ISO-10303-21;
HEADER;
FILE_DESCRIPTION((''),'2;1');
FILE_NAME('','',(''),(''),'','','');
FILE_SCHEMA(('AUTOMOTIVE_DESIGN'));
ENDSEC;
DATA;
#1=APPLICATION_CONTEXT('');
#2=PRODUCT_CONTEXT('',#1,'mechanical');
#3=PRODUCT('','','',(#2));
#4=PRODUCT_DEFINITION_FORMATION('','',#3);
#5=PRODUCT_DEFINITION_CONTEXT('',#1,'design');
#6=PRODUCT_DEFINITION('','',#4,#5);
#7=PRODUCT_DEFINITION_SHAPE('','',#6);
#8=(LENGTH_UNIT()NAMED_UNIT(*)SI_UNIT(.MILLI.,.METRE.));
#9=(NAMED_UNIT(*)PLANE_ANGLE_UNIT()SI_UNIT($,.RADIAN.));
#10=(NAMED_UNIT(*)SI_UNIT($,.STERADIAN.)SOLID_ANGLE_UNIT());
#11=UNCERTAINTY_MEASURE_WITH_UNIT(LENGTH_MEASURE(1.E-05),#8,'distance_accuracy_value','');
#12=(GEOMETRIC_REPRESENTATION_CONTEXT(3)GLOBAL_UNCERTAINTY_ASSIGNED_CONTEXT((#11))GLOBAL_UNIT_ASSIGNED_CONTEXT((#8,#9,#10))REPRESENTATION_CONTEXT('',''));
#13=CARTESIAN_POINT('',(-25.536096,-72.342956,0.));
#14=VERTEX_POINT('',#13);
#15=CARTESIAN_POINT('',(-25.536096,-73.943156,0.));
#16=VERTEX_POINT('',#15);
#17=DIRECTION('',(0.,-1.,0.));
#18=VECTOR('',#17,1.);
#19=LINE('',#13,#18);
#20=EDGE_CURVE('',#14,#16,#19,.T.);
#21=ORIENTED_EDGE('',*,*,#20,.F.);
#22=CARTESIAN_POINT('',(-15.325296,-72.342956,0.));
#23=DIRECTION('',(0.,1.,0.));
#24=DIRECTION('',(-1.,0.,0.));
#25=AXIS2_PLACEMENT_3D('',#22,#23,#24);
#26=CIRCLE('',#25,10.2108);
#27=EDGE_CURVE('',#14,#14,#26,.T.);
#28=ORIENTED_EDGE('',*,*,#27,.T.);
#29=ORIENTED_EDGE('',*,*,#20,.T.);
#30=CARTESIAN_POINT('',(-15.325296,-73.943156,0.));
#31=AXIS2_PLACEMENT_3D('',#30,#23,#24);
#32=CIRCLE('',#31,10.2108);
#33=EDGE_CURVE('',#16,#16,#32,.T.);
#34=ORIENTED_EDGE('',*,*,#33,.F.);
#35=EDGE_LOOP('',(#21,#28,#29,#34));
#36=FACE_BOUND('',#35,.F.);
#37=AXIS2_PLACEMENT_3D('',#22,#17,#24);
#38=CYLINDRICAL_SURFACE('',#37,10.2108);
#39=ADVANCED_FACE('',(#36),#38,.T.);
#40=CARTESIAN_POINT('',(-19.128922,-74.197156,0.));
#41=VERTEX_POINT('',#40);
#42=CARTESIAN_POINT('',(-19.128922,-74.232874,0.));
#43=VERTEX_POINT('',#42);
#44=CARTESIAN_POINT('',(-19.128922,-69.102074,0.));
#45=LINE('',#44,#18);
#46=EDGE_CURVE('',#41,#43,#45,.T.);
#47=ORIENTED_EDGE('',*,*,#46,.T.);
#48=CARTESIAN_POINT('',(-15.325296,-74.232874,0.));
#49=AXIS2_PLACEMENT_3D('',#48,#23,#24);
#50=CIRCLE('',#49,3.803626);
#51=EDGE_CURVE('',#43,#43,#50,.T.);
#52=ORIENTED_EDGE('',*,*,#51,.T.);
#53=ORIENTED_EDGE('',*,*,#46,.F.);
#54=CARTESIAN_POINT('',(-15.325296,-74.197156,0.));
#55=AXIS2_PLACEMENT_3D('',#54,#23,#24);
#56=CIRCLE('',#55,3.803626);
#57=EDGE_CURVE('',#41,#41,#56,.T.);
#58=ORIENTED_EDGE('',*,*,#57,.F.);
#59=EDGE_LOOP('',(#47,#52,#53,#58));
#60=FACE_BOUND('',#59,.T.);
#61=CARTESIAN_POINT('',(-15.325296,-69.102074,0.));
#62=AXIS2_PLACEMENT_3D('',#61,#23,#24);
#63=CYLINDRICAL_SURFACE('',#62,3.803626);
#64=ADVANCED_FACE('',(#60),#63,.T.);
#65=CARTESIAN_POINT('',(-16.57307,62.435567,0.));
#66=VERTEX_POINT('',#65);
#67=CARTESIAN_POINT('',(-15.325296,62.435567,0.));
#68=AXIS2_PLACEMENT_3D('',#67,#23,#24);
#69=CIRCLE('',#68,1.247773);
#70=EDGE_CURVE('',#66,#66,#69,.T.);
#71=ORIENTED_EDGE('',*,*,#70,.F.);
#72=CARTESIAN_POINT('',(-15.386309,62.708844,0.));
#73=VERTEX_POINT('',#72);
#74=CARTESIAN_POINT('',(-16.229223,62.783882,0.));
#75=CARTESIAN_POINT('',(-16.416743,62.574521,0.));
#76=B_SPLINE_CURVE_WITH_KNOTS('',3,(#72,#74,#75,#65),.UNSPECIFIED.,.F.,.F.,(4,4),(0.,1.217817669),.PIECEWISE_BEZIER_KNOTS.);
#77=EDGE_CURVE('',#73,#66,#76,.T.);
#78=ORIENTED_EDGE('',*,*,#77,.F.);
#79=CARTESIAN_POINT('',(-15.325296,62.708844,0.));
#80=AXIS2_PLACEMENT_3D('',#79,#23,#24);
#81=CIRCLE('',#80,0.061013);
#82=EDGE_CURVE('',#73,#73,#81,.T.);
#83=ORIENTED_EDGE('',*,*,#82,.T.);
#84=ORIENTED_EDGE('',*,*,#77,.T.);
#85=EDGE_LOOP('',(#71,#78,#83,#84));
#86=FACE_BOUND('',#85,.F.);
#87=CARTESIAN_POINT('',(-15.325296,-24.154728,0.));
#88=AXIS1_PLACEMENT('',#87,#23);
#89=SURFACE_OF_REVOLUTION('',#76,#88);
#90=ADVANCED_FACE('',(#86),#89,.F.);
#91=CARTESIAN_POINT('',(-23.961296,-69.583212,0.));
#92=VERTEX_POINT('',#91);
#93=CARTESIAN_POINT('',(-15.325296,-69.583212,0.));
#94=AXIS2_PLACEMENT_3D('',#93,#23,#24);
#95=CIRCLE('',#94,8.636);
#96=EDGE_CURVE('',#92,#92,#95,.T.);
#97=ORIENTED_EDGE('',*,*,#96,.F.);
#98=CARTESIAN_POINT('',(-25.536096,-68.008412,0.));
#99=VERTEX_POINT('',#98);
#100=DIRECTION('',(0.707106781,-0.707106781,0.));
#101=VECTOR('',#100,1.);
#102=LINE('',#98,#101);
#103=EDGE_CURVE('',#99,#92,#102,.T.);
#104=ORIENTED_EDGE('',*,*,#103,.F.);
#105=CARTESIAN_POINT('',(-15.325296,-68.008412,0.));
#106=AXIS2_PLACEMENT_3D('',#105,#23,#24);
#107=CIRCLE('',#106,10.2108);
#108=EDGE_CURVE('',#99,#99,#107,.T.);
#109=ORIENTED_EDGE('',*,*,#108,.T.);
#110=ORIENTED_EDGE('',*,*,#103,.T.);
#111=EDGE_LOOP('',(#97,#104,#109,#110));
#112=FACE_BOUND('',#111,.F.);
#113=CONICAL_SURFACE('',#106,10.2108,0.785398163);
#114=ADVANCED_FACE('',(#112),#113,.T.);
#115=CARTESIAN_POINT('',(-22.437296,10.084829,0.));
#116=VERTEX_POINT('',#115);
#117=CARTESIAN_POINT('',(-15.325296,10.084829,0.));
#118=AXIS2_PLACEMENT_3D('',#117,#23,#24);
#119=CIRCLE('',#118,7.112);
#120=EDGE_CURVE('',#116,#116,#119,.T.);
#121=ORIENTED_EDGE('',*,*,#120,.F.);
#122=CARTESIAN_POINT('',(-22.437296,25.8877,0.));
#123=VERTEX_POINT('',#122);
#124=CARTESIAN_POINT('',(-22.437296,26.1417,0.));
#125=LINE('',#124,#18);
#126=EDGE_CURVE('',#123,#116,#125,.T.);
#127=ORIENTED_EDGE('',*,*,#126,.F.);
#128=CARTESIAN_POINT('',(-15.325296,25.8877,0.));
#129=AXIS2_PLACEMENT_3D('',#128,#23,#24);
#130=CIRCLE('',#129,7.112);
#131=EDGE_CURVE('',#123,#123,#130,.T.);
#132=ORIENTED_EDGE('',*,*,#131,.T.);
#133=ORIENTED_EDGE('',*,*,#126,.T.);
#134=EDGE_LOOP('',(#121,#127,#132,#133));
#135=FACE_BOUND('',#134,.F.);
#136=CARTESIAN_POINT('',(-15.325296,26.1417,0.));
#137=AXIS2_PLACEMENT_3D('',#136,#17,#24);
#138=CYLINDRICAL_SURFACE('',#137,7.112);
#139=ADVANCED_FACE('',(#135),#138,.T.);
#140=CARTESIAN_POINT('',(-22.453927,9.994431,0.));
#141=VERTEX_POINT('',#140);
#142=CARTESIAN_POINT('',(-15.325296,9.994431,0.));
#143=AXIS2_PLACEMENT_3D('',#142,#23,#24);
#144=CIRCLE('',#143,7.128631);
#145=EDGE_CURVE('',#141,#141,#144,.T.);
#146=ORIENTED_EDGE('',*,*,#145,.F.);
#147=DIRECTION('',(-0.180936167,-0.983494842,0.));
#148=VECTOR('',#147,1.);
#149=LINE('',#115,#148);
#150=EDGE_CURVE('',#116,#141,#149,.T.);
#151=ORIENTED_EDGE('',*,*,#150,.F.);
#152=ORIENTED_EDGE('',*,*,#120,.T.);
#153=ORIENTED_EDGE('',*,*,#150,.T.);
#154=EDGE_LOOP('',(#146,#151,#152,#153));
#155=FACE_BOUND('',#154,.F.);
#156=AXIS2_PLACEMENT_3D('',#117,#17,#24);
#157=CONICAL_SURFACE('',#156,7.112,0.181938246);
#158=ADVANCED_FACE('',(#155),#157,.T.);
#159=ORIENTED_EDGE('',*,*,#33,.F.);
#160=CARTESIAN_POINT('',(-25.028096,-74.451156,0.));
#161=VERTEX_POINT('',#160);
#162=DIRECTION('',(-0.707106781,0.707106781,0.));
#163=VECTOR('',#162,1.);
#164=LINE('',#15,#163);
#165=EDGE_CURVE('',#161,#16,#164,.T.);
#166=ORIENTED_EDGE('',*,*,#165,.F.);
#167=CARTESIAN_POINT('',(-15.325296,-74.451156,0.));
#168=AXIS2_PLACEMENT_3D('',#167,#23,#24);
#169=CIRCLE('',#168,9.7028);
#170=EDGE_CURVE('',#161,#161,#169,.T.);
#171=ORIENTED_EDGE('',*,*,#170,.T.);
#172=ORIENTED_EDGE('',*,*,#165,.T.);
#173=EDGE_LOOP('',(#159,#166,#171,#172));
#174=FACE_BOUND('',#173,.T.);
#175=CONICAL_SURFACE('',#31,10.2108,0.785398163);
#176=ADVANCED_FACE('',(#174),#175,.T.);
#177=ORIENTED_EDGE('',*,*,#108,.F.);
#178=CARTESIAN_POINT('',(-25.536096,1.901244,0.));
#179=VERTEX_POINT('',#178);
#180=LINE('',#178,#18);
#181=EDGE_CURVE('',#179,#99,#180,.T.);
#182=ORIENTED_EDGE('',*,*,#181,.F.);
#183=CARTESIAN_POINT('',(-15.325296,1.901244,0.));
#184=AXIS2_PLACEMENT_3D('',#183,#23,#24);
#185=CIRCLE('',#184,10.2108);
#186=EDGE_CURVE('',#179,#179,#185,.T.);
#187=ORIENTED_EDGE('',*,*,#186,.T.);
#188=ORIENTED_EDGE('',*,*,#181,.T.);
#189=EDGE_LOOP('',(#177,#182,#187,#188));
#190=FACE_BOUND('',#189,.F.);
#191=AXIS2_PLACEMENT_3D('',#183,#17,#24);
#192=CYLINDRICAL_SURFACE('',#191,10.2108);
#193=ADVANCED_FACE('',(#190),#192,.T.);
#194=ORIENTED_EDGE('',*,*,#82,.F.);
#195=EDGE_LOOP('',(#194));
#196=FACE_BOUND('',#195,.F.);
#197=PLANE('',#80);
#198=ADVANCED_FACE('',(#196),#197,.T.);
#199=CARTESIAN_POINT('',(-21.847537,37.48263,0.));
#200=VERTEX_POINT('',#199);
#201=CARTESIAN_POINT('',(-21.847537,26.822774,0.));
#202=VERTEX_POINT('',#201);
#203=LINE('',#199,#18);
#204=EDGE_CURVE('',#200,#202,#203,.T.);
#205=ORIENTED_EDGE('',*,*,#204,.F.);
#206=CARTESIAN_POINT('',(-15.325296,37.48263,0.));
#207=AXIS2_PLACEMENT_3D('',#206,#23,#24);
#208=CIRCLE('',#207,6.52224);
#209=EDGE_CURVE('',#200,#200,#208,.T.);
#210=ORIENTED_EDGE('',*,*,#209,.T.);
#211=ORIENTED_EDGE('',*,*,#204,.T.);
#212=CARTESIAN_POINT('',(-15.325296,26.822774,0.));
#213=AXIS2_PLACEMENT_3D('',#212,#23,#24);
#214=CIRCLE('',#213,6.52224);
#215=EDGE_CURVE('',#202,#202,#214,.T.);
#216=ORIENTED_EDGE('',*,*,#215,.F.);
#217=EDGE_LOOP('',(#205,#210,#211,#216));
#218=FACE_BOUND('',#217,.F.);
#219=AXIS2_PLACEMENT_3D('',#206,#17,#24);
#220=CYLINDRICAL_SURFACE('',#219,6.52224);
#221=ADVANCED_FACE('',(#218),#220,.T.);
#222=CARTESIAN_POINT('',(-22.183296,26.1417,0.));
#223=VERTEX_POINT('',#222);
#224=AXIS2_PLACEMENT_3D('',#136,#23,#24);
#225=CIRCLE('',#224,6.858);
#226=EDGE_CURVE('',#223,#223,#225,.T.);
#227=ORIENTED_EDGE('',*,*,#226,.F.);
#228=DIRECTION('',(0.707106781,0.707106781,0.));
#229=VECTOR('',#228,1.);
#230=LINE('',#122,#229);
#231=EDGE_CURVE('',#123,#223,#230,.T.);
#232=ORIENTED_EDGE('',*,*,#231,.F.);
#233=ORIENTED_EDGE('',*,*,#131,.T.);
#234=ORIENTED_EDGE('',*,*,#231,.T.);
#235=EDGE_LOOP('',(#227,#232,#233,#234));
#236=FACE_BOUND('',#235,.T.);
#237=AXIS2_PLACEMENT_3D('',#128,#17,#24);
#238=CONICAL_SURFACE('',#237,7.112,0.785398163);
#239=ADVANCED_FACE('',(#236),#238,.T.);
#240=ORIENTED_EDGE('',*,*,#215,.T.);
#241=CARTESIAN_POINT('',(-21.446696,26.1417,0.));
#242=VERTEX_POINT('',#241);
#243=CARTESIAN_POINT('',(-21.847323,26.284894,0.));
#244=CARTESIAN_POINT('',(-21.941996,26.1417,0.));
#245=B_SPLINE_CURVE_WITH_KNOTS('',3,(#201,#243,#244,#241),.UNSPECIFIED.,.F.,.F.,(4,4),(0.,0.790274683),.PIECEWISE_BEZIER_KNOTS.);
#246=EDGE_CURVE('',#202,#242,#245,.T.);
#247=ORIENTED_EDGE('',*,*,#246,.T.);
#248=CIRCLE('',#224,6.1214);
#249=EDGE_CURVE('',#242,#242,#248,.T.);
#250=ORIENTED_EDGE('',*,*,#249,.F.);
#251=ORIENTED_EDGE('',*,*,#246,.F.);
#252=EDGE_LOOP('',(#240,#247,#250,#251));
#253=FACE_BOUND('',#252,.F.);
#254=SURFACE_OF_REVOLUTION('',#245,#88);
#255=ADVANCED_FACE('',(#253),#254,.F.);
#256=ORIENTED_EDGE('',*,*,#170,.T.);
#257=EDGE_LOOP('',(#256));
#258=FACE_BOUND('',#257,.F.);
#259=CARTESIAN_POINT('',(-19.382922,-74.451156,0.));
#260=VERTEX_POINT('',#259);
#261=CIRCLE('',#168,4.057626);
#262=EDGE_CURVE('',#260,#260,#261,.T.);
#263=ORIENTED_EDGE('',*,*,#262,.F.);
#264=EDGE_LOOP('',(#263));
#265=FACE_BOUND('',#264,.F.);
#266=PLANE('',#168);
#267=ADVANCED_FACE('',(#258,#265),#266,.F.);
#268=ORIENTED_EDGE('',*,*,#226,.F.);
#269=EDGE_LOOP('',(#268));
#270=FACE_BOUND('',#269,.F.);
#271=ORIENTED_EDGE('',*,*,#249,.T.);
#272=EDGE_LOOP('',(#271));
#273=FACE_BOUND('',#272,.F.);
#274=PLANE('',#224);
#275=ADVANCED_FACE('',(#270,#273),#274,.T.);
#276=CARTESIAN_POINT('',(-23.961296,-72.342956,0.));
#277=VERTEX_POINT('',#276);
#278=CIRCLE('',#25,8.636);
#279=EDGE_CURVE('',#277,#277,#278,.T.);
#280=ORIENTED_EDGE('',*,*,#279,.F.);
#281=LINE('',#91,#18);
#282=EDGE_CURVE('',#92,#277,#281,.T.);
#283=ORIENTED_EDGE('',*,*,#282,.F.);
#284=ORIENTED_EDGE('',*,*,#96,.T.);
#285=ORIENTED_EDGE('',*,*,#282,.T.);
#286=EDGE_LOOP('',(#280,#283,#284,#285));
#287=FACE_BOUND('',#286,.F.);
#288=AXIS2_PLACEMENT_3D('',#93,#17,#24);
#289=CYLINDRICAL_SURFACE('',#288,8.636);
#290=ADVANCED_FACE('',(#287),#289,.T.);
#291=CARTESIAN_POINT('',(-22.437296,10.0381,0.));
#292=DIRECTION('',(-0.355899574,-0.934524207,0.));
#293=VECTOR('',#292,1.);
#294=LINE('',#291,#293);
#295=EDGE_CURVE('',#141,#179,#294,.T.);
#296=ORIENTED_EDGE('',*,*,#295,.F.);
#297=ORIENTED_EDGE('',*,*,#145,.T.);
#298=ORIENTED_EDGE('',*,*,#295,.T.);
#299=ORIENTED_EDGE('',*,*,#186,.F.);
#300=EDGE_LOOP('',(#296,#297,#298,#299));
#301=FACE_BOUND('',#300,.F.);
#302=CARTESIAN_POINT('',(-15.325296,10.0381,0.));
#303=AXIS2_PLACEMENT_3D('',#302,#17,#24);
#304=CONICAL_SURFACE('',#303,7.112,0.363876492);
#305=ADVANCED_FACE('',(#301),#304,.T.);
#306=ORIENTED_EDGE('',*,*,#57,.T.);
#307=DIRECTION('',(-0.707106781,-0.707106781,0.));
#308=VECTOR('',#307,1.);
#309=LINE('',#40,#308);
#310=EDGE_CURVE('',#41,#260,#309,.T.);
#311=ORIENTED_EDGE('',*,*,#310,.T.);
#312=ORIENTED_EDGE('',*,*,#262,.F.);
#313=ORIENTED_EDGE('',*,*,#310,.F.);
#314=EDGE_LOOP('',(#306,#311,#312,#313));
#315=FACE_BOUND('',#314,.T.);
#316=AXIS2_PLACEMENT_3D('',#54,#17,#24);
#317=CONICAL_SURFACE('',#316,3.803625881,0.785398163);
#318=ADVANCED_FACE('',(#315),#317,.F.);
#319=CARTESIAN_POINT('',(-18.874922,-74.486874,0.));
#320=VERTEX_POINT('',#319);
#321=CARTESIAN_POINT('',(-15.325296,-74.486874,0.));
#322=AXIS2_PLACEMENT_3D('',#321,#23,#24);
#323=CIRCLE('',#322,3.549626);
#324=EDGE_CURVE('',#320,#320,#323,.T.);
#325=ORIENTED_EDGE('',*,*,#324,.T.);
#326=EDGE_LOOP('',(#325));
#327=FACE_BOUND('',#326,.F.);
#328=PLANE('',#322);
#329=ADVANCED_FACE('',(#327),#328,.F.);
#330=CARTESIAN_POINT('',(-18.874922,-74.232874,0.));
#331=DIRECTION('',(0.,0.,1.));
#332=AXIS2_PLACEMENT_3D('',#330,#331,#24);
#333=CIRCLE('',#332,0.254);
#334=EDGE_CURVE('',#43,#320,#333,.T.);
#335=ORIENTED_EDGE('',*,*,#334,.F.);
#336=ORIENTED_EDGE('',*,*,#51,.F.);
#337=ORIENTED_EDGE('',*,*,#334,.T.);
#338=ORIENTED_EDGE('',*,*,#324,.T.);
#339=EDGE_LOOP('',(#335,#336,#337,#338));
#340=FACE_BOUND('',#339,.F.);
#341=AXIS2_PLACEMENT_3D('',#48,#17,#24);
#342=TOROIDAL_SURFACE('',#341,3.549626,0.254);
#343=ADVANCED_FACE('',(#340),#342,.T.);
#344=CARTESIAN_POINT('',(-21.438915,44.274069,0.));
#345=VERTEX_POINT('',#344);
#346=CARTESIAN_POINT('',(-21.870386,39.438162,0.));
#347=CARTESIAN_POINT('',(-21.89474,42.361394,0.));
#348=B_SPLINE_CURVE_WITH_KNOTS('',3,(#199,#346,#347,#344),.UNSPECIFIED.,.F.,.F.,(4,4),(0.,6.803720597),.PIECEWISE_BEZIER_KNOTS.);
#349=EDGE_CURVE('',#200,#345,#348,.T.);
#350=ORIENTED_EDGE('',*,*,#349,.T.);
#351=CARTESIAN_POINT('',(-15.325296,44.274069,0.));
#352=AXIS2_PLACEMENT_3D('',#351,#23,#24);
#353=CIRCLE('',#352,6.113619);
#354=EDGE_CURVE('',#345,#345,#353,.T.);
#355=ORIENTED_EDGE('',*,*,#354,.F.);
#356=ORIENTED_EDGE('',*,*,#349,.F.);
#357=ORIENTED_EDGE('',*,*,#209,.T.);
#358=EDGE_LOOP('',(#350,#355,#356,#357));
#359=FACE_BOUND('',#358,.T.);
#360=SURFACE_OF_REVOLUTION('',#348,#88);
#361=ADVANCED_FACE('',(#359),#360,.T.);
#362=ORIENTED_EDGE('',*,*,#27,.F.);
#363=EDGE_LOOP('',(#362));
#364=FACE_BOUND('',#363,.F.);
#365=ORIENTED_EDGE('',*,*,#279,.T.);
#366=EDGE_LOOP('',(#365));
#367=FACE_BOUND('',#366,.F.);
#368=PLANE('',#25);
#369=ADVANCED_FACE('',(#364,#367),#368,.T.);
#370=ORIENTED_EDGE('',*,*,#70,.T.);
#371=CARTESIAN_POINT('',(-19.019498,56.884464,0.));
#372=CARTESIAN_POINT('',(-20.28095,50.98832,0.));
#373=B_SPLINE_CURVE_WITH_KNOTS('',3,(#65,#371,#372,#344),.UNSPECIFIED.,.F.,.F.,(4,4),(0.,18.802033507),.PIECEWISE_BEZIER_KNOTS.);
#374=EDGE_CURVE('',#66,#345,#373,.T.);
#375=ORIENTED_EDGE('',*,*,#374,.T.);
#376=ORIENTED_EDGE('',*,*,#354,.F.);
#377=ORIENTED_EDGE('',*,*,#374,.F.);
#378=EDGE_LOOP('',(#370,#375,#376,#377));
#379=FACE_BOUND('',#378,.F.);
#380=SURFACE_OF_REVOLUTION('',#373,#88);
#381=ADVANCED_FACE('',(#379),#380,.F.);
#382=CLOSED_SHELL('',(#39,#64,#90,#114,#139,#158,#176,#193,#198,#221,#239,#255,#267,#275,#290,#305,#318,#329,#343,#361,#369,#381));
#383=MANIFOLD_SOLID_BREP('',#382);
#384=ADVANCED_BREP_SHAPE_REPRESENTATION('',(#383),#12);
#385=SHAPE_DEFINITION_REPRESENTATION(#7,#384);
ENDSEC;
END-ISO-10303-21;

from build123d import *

# Parameters (mm, degrees)
F3_DEPTH = 5.3848
F4_R     = 0.254
F5_SIZE  = 0.508


# Not quite as in the source:
# - a fillet or chamfer that OpenCascade refuses, or shapes differently, is made with other operations: its cross-section is extruded or revolved along the edge and cut away or added


with BuildPart() as f1:
    # F0 (on Top) → F1 (revolve)
    with BuildSketch(Plane.XY):
        Polygon((-19.1289222062, -69.1020740439), (-15.3252963252, -69.1020740439), (-15.3252963252, 26.1417003232), (-21.4466963252, 26.1417003232), (-22.4372963252, 26.1417003232), (-22.4372963252, 10.0381003232), (-25.5360963252, 1.9012442353), (-25.5360963252, -68.0084118526), (-23.9612963252, -69.5832118526), (-23.9612963252, -72.3429557647), (-25.5360963252, -72.3429557647), (-25.5360963252, -74.4511557647), (-19.1289222062, -74.4511557647), align=None)
        with BuildLine():
            Line((-21.4466963252, 26.1417003232), (-15.3252963252, 26.1417003232))
            Line((-15.3252963252, 26.1417003232), (-15.3252963252, 62.7088442353))
            Line((-15.3252963252, 62.7088442353), (-15.3863094747, 62.7088442353))
            add(Edge.make_bspline(
                [(-15.3863094747, 62.7088442353), (-16.22922346, 62.7838820219), (-16.4167433977, 62.5745207071), (-16.5730696172, 62.435567379)],
                knots=[0, 0, 0, 0, 1.2178176694, 1.2178176694, 1.2178176694, 1.2178176694], degree=3))
            add(Edge.make_bspline(
                [(-16.5730696172, 62.435567379), (-19.0194975585, 56.8844638765), (-20.2809497714, 50.9883202612), (-21.4389152825, 44.2740693688)],
                knots=[0, 0, 0, 0, 18.8020335074, 18.8020335074, 18.8020335074, 18.8020335074], degree=3))
            add(Edge.make_bspline(
                [(-21.8475367874, 37.4826304615), (-21.8703859069, 39.438161999), (-21.8947399408, 42.3613935709), (-21.4389152825, 44.2740693688)],
                knots=[0, 0, 0, 0, 6.8037205974, 6.8037205974, 6.8037205974, 6.8037205974], degree=3))
            Line((-21.8475367874, 37.4826304615), (-21.8475367874, 26.8227737397))
            add(Edge.make_bspline(
                [(-21.8475367874, 26.8227737397), (-21.8473226346, 26.2848939747), (-21.9419963252, 26.1417003232), (-21.4466963252, 26.1417003232)],
                knots=[0, 0, 0, 0, 0.7902746831, 0.7902746831, 0.7902746831, 0.7902746831], degree=3))
        make_face()
    revolve(axis=Axis((-15.3252963252, -24.1547277207, 0), (0, 1, 0)))

    # F2: chamfer of 0.254 on 3 edges, made by hand

    # F2_s1 → F2_t2 (revolve)
    with BuildSketch(Plane.XY):
        Polygon((-22.4372963252, 10.0848293801), (-22.4539271766, 9.9944308884), (-22.4372963252, 10.0381003232), align=None)
    revolve(axis=Axis((-15.3252963252, 10.0381003232, 0), (0, 1, 0)))

    # F2_s3 → F2_t4 (revolve, cut)
    with BuildSketch(Plane.XY):
        Polygon((-19.1289222062, -74.1971557647), (-19.3829222062, -74.4511557647), (-19.1289222062, -74.4511557647), align=None)
    revolve(axis=Axis((-15.3252963252, -74.4511557647, 0), (0, 1, 0)), mode=Mode.SUBTRACT)

    # F2_s5 → F2_t6 (revolve, cut)
    with BuildSketch(Plane.XY):
        Polygon((-22.4372963252, 25.8877003232), (-22.1832963252, 26.1417003232), (-22.4372963252, 26.1417003232), align=None)
    revolve(axis=Axis((-15.3252963252, 26.1417003232, 0), (0, 1, 0)), mode=Mode.SUBTRACT)

    # F3 (add): a face of the model
    f3_faces = [f1.faces().sort_by_distance(p)[0] for p in [
        (-15.3252963252, -69.1020740439, 0),
    ]]
    extrude(f3_faces, amount=F3_DEPTH)

    # F4
    f4_edges = [f1.edges().sort_by_distance(p)[0] for p in [
        (-11.52167, -74.486874, 0),
    ]]
    fillet(f4_edges, radius=F4_R)

    # F5
    f5_edges = [f1.edges().sort_by_distance(p)[0] for p in [
        (-5.114496, -74.451156, 0),
    ]]
    chamfer(f5_edges, length=F5_SIZE)


solid = f1.part
